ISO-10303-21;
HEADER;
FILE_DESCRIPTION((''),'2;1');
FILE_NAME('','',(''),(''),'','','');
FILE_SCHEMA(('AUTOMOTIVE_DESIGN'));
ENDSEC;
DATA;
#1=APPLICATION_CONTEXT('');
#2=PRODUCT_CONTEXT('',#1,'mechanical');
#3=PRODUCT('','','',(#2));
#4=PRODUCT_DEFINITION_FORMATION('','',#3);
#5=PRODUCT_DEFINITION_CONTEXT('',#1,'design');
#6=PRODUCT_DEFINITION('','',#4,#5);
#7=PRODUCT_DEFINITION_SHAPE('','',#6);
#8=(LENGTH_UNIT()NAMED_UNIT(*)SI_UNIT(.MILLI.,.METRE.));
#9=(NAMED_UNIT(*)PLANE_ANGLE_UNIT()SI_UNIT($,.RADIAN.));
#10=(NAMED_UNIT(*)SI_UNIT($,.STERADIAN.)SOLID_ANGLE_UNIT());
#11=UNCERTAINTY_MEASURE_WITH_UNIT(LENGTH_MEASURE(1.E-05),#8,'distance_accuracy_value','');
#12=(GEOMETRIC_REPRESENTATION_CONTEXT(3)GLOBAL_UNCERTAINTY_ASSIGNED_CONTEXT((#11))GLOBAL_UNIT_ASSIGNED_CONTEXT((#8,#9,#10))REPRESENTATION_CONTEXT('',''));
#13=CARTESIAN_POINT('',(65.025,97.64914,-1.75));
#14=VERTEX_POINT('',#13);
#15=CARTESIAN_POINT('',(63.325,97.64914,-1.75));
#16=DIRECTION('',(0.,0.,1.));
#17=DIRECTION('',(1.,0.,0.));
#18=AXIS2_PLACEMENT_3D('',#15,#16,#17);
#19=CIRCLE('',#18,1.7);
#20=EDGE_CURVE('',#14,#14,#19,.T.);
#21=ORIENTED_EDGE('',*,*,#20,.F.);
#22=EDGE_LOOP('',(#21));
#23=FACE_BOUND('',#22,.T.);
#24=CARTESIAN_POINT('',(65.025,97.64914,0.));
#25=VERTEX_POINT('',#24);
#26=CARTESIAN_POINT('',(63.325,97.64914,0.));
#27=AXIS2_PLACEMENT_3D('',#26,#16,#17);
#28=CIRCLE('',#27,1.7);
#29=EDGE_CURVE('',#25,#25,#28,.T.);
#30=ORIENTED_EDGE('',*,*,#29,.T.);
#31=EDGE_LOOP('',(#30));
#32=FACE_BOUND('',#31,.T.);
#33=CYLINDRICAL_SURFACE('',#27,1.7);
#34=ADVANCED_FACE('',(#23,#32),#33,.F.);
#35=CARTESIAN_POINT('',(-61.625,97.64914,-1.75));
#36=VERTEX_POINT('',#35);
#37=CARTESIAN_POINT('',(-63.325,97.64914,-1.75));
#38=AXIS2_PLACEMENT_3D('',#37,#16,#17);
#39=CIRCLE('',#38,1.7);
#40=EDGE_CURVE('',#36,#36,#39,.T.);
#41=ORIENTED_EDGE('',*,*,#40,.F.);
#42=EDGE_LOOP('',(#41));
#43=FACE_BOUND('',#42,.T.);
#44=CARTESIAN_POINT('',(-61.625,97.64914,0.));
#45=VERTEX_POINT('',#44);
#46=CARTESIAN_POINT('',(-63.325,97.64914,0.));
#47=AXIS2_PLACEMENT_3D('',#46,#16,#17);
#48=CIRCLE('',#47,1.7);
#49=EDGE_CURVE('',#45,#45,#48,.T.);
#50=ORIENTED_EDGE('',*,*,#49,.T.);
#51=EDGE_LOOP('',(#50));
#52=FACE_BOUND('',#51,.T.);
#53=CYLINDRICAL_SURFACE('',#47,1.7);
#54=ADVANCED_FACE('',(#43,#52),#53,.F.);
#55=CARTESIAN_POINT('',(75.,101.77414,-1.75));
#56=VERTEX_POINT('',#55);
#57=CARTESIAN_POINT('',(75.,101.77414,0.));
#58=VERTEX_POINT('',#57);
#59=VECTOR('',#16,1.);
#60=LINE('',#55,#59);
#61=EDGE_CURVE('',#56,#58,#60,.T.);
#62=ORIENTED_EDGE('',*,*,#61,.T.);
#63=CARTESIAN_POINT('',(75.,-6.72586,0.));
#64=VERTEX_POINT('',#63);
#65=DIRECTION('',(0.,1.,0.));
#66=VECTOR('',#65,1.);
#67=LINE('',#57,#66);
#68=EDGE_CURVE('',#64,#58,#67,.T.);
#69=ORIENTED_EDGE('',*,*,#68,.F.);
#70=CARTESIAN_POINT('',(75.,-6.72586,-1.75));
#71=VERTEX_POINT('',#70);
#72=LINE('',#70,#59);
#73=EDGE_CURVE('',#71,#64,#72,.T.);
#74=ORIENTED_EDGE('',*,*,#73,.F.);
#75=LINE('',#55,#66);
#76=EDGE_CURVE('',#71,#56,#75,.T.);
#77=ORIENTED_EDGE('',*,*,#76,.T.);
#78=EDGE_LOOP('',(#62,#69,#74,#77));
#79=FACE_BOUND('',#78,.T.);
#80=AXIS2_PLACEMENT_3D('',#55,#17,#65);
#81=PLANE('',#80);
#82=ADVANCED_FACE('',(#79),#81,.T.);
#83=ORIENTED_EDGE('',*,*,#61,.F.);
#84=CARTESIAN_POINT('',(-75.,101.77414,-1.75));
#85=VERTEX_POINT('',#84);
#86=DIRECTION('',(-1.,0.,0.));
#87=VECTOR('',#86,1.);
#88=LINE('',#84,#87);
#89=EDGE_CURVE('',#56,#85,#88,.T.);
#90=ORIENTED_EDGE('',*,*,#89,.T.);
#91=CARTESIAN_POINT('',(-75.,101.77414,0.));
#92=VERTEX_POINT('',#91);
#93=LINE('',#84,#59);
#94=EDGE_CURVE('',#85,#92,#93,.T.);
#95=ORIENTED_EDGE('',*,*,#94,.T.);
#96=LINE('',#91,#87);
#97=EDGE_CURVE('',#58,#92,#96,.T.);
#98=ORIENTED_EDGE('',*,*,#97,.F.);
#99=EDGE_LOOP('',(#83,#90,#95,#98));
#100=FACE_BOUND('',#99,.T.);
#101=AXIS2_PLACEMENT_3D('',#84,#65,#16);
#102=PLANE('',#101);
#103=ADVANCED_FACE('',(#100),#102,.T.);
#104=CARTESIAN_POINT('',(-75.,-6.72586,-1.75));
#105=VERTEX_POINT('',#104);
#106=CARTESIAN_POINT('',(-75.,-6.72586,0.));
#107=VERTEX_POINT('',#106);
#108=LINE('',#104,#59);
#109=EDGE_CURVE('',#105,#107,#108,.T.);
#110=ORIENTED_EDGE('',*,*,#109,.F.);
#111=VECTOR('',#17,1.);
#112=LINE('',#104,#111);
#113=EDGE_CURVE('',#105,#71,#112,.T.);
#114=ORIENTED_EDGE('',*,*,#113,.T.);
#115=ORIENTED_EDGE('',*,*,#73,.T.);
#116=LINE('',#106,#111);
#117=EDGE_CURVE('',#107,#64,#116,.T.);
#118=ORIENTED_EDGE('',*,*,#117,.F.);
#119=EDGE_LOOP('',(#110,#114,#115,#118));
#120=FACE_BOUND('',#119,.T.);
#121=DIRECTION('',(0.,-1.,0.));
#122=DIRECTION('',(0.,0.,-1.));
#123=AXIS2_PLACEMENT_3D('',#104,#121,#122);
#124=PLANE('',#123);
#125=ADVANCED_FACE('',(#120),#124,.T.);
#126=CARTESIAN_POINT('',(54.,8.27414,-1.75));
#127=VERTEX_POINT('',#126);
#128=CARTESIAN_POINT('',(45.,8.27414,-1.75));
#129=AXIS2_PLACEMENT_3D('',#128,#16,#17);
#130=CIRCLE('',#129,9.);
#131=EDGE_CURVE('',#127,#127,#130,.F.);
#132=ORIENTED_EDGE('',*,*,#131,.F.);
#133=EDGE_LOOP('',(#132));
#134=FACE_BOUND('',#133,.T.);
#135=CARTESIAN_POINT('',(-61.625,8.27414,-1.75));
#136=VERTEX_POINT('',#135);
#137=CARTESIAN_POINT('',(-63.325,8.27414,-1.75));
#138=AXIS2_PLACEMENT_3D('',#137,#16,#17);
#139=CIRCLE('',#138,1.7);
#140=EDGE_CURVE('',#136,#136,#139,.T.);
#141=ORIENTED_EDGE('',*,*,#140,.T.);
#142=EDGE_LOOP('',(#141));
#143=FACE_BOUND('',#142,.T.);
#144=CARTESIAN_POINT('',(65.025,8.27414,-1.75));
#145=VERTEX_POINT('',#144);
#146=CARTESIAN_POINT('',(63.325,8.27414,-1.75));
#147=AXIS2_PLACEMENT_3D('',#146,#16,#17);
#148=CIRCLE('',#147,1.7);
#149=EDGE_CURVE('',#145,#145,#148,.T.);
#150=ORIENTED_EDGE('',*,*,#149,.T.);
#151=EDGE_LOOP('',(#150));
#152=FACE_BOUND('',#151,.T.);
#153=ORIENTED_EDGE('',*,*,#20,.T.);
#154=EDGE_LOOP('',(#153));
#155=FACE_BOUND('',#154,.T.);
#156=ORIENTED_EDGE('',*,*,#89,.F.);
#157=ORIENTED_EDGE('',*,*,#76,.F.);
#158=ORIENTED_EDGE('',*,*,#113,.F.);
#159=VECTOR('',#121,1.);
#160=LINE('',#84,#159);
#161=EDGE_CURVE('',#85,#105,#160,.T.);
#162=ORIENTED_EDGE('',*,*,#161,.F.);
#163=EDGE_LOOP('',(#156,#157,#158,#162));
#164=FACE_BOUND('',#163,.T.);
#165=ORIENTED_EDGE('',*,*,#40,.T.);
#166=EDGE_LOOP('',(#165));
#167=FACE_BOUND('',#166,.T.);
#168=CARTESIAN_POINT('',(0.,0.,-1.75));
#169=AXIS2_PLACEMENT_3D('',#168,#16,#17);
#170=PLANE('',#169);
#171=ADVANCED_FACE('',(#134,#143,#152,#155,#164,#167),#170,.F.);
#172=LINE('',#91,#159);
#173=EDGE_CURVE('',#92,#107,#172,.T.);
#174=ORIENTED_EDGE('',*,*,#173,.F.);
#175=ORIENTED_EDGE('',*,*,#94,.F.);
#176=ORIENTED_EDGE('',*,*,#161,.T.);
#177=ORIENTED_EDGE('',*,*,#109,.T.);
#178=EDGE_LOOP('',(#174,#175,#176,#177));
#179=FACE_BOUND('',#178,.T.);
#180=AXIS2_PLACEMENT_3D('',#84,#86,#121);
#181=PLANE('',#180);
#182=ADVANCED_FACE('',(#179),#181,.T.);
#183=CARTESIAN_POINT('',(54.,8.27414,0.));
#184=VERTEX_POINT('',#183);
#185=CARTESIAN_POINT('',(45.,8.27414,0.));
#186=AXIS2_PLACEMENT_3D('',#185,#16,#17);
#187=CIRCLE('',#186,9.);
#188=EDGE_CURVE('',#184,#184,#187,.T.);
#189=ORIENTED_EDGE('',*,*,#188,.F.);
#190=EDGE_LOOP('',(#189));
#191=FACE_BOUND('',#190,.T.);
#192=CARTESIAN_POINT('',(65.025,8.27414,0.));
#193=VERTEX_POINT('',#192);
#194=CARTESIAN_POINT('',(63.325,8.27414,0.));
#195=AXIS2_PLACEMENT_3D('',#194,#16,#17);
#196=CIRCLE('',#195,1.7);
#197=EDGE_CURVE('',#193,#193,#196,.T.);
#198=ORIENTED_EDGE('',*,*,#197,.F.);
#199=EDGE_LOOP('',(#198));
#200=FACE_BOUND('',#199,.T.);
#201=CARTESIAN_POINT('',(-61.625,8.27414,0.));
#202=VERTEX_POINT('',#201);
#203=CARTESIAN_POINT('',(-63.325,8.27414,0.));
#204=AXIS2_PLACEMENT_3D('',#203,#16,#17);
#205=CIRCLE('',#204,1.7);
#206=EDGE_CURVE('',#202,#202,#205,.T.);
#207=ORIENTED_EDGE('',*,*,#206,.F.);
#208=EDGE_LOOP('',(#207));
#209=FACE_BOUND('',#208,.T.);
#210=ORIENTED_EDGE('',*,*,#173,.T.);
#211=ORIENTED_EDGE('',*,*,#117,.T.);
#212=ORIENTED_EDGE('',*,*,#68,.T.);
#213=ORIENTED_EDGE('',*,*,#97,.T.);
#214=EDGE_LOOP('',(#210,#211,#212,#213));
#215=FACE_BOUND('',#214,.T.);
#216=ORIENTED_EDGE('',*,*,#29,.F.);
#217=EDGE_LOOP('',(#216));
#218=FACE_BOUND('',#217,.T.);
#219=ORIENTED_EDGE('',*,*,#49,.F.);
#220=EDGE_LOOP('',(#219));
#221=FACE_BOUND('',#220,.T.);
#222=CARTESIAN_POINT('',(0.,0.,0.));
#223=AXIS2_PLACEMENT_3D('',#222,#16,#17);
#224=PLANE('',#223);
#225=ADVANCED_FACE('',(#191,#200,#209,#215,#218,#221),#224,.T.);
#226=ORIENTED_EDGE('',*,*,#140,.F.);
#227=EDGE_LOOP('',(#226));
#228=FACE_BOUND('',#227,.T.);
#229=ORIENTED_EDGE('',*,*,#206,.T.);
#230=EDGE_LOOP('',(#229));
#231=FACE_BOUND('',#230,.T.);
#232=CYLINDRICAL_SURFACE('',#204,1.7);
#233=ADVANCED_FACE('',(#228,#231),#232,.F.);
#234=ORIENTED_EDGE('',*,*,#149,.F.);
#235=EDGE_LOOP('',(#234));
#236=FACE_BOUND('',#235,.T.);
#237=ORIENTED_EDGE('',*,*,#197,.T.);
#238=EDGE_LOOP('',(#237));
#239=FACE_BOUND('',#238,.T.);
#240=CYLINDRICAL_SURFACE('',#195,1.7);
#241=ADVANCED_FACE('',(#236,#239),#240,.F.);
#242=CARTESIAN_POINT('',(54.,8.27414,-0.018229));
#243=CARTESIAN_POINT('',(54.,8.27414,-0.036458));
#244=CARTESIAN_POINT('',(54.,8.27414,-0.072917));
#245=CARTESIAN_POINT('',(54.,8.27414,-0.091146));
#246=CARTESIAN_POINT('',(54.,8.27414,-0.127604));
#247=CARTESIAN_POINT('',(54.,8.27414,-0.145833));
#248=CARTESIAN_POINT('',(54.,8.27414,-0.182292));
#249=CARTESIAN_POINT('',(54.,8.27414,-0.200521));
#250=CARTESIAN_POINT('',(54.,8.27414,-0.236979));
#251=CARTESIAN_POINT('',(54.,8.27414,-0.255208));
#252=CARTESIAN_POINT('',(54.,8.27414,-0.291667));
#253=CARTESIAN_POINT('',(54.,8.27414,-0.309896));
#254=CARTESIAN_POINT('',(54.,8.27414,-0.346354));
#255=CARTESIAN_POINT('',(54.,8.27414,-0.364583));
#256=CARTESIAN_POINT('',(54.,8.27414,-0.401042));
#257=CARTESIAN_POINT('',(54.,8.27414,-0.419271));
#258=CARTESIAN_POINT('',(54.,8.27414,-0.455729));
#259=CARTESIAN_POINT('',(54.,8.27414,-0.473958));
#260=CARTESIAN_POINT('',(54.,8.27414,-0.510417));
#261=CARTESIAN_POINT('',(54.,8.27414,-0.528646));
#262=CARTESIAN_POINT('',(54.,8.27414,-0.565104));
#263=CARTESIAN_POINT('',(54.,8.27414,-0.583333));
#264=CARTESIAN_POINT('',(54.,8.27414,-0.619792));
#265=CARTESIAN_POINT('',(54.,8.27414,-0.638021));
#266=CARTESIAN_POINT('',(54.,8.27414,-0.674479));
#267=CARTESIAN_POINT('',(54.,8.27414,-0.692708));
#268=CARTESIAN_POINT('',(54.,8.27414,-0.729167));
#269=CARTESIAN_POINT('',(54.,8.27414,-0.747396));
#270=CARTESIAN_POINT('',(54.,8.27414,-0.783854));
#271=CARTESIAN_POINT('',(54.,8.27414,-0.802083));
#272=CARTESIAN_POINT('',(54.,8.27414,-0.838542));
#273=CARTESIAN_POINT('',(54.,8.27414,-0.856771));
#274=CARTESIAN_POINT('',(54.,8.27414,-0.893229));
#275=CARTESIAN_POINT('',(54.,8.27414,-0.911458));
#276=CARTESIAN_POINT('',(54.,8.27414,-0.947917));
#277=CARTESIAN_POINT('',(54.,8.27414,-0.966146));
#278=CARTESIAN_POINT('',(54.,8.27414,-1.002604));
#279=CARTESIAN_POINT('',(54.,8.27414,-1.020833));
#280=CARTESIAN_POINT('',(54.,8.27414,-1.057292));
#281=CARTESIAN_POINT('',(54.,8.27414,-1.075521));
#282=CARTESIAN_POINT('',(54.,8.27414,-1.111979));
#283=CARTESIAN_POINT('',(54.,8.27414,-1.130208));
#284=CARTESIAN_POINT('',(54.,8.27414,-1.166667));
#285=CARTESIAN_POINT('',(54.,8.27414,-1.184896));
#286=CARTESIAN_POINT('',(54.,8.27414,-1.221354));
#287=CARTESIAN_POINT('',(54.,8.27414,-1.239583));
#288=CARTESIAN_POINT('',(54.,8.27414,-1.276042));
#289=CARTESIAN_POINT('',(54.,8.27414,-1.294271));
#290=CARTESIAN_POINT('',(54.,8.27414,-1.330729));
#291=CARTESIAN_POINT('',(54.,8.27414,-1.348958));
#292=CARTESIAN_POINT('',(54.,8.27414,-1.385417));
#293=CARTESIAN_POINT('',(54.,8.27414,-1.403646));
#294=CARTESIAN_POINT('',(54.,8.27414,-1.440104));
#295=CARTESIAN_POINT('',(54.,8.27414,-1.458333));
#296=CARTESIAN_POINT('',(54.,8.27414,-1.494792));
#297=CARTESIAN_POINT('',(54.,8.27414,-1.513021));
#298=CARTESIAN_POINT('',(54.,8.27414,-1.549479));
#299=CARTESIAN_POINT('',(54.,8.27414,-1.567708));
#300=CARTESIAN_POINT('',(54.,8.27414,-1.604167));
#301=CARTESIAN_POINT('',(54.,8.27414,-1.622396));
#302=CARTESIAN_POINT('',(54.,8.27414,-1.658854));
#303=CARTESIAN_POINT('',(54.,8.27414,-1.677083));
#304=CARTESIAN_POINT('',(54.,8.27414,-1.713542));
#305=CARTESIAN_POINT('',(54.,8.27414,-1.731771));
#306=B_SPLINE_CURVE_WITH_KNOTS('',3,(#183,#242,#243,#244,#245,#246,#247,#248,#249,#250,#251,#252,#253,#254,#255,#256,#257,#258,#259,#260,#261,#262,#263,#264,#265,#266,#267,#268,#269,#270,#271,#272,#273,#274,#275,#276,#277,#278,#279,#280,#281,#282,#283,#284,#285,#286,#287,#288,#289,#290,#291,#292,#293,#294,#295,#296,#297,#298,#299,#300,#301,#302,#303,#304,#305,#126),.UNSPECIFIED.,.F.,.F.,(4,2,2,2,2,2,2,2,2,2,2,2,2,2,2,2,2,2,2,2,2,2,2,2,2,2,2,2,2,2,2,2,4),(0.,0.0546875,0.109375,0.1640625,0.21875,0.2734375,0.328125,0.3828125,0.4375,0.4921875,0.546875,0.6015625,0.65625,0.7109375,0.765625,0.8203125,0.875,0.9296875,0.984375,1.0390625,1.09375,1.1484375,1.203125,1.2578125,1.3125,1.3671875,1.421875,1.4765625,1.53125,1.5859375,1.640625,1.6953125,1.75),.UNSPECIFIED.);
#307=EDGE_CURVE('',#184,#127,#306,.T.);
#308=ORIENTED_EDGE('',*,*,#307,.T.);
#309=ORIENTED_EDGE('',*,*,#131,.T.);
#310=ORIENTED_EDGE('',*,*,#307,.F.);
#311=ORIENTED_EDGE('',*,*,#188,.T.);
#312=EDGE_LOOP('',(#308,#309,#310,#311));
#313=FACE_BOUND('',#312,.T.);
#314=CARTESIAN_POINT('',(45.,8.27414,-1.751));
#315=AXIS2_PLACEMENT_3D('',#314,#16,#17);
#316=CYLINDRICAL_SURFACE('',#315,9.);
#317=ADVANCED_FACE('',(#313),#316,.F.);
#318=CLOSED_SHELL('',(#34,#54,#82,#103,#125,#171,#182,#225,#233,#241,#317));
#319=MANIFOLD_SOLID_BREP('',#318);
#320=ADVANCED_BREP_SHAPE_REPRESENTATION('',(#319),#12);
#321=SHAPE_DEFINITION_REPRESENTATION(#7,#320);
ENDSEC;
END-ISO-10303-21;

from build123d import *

# Parameters (mm, degrees)
SKETCH1_W            = 150
SKETCH1_H            = 108.5
BASE_FLANGE1_DEPTH   = 1.75
CUT_EXTRUDE1_REACH   = 128.436
SKETCH6_R            = 9
M3_CLEARANCE_HOLE1_D = 3.4


# Sheet-metal steps are written as plain solids
with BuildPart() as part:
    # Sketch1 → Base-Flange1 (new body)
    with BuildSketch(Plane.XY):
        with Locations((0, 47.52414015)):
            Rectangle(SKETCH1_W, SKETCH1_H)
    extrude(amount=-BASE_FLANGE1_DEPTH)

    # Sketch6 → Cut-Extrude1 (cut, up to next)
    with BuildSketch(Plane.XY, mode=Mode.PRIVATE) as cut_extrude1_sk1:
        with Locations((45, 8.27414015)):
            Circle(SKETCH6_R)
    cut_extrude1_tool1 = extrude(cut_extrude1_sk1.sketch, amount=-CUT_EXTRUDE1_REACH, mode=Mode.PRIVATE) & part.part
    add(cut_extrude1_tool1.solids().sort_by_distance((45, 8.27414, 0))[0], mode=Mode.SUBTRACT)

    # M3 Clearance Hole1 (through all)
    with Locations(Plane.XY):
        with Locations((63.325, 8.27414015), (63.325, 97.64914015)):
            m3_clearance_hole1 = Hole(M3_CLEARANCE_HOLE1_D / 2)

    # Mirror1: M3 Clearance Hole1 across plane
    add(m3_clearance_hole1.mirror(Plane(origin=(0, 0, 0), x_dir=(0, 0, 1), z_dir=(1, 0, 0))), mode=Mode.SUBTRACT)


solid = part.part
